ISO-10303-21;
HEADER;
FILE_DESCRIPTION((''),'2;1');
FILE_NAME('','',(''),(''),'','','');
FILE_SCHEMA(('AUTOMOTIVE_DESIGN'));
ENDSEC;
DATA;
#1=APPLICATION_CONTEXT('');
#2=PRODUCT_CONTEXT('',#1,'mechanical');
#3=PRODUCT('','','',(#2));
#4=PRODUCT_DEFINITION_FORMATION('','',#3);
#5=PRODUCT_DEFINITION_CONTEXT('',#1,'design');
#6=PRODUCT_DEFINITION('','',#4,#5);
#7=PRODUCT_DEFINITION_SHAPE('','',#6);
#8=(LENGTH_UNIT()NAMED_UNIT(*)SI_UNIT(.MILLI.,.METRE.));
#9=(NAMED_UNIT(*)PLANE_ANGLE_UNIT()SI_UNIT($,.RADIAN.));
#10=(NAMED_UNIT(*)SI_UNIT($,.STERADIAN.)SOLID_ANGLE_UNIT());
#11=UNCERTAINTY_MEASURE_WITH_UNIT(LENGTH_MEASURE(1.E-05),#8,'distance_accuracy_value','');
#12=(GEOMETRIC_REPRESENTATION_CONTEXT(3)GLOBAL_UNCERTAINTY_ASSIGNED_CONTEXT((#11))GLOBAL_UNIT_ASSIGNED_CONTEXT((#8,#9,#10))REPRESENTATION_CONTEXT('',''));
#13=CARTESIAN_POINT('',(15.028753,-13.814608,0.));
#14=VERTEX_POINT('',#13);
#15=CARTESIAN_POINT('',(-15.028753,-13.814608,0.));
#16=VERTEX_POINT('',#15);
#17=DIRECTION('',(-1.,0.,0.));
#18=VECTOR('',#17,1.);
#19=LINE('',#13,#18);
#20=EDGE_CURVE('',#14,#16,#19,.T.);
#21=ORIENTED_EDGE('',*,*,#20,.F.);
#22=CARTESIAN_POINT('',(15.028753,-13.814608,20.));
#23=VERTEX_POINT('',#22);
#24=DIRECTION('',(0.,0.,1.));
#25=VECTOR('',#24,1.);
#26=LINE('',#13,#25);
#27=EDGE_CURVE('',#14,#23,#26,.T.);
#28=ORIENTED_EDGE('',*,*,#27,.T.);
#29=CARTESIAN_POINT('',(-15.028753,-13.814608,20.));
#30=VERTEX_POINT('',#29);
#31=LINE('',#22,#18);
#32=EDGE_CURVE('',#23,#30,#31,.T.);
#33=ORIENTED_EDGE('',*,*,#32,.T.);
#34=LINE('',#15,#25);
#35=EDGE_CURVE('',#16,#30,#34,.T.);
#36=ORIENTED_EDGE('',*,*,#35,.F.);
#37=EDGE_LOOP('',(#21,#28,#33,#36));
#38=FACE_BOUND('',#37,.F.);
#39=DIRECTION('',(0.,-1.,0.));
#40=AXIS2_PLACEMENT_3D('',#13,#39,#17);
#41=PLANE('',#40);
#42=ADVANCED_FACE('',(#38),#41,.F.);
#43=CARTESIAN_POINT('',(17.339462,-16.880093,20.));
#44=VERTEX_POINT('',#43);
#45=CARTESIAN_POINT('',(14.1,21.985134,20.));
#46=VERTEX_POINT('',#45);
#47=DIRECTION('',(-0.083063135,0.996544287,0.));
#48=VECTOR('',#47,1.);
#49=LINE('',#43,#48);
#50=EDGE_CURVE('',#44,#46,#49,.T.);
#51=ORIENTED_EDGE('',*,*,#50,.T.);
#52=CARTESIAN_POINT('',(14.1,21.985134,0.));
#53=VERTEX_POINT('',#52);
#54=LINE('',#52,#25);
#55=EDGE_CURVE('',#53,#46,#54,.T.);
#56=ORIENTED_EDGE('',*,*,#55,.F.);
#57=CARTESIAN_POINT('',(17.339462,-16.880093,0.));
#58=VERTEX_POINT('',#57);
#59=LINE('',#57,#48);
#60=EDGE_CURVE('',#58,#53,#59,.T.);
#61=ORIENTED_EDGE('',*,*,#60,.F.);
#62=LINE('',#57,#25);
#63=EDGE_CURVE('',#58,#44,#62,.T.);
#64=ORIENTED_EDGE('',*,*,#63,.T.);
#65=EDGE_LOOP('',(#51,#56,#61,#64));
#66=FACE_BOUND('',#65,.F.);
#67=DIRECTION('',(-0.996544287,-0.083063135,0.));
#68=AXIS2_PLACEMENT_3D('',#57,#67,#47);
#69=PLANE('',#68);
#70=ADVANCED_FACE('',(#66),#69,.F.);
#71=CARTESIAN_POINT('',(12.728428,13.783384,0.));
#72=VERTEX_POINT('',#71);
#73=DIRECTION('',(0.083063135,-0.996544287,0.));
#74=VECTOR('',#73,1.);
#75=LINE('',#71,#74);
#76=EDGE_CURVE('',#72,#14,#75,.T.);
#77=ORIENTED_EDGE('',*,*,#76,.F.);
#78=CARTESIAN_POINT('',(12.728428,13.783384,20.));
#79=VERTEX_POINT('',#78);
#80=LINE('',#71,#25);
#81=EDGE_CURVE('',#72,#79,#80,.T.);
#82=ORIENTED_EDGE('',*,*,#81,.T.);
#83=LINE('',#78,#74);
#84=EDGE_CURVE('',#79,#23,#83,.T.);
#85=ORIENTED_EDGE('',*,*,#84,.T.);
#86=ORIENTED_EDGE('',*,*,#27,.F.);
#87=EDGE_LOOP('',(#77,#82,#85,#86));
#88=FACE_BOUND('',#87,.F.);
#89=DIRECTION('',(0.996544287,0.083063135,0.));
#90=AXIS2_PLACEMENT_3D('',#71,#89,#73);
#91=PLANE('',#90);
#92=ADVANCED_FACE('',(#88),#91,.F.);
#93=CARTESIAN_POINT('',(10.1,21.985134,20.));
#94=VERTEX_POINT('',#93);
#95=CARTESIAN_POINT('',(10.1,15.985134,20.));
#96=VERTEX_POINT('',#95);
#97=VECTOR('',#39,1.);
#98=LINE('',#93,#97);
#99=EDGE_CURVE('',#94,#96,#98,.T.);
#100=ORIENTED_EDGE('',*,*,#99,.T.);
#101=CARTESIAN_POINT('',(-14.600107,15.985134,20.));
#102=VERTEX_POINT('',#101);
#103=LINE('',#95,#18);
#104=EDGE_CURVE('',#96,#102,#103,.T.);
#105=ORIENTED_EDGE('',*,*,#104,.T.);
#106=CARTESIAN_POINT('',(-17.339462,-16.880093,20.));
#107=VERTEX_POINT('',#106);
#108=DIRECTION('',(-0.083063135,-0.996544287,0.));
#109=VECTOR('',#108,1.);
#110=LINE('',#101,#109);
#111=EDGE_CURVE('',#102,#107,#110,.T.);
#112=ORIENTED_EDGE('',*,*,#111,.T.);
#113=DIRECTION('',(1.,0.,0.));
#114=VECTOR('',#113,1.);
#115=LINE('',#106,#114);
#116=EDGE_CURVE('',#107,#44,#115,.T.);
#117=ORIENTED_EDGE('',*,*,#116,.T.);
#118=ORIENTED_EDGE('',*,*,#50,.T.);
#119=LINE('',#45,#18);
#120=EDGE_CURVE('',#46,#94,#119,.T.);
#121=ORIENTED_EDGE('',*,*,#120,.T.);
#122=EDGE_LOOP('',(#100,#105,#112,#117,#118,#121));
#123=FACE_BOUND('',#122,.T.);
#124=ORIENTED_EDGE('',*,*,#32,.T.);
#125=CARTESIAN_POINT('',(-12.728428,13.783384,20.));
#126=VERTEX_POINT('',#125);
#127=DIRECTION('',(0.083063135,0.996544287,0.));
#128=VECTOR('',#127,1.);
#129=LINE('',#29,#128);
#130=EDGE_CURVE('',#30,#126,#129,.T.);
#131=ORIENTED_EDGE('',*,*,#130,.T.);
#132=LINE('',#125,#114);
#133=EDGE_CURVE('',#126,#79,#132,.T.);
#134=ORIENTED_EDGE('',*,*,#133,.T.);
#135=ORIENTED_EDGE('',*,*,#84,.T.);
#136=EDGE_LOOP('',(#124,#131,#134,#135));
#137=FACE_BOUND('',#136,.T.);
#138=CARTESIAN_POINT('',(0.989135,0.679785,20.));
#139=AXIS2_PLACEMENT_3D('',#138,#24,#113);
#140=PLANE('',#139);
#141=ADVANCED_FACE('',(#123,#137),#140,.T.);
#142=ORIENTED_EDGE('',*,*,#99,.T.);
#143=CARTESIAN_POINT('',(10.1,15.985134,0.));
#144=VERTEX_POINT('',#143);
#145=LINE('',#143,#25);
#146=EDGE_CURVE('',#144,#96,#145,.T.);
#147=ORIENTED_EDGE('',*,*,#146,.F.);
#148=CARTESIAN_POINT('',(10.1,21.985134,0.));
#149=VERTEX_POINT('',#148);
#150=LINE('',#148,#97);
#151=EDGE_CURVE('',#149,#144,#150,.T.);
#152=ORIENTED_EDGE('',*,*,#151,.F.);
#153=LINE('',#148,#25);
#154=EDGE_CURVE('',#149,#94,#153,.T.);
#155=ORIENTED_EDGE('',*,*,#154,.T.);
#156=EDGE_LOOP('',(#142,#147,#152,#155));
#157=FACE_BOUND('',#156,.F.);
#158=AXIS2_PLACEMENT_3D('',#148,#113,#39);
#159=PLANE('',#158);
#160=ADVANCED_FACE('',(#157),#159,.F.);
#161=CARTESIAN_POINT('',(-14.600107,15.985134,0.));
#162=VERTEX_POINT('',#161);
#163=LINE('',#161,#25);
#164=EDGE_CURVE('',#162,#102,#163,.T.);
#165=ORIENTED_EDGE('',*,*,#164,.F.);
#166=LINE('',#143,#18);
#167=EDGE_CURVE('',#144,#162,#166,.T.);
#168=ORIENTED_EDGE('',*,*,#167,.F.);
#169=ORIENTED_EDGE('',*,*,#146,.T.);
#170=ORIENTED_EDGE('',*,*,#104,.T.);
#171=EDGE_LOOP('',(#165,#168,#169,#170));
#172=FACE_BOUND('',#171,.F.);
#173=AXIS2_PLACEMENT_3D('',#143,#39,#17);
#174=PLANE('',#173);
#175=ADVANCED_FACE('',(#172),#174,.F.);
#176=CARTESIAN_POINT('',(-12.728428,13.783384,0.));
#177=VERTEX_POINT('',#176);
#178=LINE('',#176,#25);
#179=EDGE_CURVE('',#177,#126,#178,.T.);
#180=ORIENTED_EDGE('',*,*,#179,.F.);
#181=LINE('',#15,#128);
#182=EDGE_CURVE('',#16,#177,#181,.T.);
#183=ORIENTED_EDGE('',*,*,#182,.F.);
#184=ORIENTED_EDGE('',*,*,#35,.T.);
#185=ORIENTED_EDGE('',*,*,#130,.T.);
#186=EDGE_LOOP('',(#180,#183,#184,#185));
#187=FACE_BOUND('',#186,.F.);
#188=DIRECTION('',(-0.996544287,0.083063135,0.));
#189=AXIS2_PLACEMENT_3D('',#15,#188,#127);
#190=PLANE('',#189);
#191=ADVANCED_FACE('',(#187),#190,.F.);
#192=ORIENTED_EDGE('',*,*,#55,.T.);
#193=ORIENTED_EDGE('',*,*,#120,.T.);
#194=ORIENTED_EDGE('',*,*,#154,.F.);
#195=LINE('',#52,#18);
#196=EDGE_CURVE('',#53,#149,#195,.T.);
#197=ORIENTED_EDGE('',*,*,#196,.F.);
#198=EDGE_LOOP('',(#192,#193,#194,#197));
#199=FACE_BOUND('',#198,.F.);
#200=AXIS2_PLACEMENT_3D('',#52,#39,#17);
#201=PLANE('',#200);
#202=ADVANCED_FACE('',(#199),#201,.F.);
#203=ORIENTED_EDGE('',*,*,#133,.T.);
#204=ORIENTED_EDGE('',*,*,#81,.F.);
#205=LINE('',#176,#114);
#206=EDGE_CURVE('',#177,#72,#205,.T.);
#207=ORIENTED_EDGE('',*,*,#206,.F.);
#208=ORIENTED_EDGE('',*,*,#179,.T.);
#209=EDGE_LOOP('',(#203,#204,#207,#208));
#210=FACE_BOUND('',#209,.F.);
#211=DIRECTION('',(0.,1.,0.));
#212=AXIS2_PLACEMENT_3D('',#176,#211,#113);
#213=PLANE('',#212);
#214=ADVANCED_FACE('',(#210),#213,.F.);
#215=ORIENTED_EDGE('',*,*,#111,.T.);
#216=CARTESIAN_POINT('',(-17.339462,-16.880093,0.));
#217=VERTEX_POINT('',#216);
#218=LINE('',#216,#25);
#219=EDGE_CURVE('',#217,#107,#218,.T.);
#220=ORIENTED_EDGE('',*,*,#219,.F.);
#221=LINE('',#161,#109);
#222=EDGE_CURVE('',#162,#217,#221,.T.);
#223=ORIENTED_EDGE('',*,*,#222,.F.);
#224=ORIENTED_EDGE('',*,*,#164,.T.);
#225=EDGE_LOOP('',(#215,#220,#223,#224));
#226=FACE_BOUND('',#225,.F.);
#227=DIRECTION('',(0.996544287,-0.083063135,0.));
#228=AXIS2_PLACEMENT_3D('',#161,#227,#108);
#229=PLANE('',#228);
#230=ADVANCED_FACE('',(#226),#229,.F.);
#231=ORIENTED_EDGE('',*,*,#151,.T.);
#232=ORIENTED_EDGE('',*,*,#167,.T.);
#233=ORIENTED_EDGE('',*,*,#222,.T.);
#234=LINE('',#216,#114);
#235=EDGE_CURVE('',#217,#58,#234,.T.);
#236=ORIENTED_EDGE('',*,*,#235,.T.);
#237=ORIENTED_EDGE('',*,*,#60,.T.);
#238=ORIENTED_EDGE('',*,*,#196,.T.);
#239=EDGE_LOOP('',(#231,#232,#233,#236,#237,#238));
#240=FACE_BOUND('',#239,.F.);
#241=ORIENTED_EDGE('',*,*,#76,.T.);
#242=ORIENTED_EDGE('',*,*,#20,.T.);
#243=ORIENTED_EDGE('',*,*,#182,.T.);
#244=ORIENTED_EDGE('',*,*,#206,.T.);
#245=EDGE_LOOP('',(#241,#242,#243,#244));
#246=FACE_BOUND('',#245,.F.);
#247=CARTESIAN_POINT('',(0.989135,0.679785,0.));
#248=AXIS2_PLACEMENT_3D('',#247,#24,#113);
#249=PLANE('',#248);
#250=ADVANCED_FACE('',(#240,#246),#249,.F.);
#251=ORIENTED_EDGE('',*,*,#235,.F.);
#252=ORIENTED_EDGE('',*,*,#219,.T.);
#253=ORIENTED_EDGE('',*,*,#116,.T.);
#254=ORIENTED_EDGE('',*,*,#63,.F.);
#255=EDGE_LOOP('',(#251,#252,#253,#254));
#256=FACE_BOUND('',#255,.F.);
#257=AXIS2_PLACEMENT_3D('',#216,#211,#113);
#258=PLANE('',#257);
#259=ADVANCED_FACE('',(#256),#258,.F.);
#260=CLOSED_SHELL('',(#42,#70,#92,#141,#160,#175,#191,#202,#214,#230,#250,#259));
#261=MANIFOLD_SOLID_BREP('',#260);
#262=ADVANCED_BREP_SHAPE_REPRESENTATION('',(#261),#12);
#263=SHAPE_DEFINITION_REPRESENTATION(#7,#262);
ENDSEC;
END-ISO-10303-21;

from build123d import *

# Parameters (mm, degrees)
F1_DEPTH = 20


# Not quite as in the source:
# - a feature names something its author has since deleted; it is built from what else it names


with BuildPart() as f1:
    # F0 (on Top) → F1 (new body)
    with BuildSketch(Plane.XY):
        Polygon((0, 15.9851339135), (-10.1, 15.9851339135), (-14.6001070377, 15.9851339135), (-17.3394622729, -16.880093272), (0, -16.880093272), (17.3394622729, -16.880093272), (14.1, 21.9851339135), (10.1, 21.9851339135), (10.1, 15.9851339135), align=None)
        Polygon((11.9072113089, -13.8146081649), (-11.9072113089, -13.8146081649), (-15.0287533179, -13.8146081649), (-12.7284283152, 13.7833838166), (-9.6068863062, 13.7833838166), (0, 13.7833838166), (9.6068863062, 13.7833838166), (12.7284283152, 13.7833838166), (15.0287533179, -13.8146081649), align=None, mode=Mode.SUBTRACT)
    extrude(amount=F1_DEPTH)


solid = f1.part
